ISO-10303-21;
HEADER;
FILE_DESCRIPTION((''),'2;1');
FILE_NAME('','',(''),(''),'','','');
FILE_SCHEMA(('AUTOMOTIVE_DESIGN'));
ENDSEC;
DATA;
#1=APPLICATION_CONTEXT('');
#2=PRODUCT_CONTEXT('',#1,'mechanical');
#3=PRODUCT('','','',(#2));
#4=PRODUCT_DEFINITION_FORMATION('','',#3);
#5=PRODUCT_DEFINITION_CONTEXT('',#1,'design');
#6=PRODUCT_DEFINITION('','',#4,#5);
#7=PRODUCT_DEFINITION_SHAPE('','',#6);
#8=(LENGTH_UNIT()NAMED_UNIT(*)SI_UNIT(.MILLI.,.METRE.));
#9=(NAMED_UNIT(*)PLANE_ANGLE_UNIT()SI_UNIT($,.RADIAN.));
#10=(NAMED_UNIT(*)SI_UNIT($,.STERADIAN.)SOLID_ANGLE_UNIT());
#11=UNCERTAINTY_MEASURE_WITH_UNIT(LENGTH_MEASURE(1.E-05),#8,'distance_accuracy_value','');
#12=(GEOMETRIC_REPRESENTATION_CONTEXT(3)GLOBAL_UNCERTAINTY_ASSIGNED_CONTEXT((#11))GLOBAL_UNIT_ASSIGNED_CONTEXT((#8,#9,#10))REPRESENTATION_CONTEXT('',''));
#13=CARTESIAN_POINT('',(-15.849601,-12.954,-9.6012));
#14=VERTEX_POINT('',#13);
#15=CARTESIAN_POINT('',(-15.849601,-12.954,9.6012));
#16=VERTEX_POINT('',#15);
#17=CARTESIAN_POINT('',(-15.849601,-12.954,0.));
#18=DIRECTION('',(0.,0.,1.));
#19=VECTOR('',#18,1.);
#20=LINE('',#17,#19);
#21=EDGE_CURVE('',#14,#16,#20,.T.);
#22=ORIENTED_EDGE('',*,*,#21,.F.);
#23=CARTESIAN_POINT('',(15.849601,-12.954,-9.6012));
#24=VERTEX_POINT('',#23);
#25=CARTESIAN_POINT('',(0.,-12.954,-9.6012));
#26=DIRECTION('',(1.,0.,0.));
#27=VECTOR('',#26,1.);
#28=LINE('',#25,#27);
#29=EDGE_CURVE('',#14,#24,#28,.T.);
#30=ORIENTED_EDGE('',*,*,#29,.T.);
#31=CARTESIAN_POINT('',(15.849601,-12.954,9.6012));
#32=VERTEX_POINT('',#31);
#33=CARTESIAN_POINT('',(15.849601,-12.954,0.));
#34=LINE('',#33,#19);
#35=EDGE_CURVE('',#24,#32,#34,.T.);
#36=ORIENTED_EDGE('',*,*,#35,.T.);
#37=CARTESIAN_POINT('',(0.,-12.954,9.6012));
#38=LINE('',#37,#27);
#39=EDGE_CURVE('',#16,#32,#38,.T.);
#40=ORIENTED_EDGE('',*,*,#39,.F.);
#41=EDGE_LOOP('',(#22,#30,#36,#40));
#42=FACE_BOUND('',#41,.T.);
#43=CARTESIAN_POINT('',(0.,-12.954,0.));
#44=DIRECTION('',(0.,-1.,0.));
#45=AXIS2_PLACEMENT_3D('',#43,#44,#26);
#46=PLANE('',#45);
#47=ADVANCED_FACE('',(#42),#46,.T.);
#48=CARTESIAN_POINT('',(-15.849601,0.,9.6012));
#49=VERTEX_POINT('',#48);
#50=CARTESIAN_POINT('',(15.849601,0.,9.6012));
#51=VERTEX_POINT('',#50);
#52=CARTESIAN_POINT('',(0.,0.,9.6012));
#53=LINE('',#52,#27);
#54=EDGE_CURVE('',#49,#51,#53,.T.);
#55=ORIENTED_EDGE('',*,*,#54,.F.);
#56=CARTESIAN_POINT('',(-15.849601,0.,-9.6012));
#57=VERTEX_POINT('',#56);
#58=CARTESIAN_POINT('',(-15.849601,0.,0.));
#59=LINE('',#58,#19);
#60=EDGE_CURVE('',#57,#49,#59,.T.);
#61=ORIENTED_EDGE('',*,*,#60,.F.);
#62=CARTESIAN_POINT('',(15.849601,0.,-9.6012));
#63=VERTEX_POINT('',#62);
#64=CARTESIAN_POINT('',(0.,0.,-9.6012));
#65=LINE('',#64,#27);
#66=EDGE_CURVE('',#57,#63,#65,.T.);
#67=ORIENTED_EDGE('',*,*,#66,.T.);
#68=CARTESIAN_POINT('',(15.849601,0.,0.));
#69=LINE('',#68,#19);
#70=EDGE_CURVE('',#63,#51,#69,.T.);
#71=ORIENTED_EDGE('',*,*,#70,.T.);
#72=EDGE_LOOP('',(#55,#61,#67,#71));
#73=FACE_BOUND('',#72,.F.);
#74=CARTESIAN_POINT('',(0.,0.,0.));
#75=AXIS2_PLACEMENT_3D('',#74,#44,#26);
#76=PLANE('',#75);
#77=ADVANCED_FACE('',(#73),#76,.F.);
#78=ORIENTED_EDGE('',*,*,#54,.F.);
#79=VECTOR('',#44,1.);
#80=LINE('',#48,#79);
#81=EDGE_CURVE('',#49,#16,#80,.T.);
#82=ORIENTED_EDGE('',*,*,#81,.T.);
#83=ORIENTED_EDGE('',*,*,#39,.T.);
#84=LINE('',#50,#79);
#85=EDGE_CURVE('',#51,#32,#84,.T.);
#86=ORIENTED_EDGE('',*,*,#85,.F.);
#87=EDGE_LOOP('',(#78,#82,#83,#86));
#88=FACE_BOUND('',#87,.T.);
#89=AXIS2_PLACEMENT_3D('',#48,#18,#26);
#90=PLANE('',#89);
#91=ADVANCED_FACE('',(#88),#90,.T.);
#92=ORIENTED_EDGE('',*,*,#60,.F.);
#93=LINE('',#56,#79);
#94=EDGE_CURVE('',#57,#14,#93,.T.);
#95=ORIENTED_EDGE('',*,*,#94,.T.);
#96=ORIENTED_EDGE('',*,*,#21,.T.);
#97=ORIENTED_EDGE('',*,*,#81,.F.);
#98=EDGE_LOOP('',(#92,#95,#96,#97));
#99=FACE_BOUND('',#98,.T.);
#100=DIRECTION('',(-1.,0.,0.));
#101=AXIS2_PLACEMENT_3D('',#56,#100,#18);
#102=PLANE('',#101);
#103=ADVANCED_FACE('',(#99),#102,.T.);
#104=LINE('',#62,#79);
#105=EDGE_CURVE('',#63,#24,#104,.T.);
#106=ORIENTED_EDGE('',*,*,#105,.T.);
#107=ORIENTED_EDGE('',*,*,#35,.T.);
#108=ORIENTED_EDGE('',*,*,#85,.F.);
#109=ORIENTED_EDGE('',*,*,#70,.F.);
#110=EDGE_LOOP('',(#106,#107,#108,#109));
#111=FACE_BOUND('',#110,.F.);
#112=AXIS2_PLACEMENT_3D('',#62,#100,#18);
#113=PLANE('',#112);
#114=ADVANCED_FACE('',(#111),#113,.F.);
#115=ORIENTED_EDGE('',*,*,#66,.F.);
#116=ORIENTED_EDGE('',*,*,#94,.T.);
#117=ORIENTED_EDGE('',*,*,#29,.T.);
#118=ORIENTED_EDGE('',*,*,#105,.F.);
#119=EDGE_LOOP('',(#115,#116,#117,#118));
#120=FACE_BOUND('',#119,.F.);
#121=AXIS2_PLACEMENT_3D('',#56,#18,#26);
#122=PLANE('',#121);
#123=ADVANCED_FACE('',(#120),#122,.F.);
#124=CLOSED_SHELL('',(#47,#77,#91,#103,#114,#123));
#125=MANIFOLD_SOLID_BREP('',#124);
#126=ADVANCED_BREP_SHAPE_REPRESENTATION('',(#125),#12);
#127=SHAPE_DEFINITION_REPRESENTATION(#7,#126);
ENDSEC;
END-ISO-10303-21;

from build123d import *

# Parameters (mm, degrees)
F0_W     = 31.6992029548
F0_H     = 19.2023999989
F0_R     = 4.5234834091
F0_R_2   = 4.8791801503
F1_DEPTH = 12.954


# Not quite as in the source:
# - the program builds the solid bodies; features that only make, move or delete a surface that nothing else refers to are left out


with BuildPart() as f1:
    # F0 (on Front) → F1 (new body)
    with BuildSketch(Plane.XZ):
        Rectangle(F0_W, F0_H)
        with Locations((-9.1440007091, 0)):
            Circle(F0_R, mode=Mode.SUBTRACT)
        with Locations((8.8392002508, 0)):
            Circle(F0_R_2, mode=Mode.SUBTRACT)
        with Locations((-9.1440007091, 0)):
            Circle(F0_R)
        with Locations((8.8392002508, 0)):
            Circle(F0_R_2)
    extrude(amount=F1_DEPTH)


solid = f1.part
